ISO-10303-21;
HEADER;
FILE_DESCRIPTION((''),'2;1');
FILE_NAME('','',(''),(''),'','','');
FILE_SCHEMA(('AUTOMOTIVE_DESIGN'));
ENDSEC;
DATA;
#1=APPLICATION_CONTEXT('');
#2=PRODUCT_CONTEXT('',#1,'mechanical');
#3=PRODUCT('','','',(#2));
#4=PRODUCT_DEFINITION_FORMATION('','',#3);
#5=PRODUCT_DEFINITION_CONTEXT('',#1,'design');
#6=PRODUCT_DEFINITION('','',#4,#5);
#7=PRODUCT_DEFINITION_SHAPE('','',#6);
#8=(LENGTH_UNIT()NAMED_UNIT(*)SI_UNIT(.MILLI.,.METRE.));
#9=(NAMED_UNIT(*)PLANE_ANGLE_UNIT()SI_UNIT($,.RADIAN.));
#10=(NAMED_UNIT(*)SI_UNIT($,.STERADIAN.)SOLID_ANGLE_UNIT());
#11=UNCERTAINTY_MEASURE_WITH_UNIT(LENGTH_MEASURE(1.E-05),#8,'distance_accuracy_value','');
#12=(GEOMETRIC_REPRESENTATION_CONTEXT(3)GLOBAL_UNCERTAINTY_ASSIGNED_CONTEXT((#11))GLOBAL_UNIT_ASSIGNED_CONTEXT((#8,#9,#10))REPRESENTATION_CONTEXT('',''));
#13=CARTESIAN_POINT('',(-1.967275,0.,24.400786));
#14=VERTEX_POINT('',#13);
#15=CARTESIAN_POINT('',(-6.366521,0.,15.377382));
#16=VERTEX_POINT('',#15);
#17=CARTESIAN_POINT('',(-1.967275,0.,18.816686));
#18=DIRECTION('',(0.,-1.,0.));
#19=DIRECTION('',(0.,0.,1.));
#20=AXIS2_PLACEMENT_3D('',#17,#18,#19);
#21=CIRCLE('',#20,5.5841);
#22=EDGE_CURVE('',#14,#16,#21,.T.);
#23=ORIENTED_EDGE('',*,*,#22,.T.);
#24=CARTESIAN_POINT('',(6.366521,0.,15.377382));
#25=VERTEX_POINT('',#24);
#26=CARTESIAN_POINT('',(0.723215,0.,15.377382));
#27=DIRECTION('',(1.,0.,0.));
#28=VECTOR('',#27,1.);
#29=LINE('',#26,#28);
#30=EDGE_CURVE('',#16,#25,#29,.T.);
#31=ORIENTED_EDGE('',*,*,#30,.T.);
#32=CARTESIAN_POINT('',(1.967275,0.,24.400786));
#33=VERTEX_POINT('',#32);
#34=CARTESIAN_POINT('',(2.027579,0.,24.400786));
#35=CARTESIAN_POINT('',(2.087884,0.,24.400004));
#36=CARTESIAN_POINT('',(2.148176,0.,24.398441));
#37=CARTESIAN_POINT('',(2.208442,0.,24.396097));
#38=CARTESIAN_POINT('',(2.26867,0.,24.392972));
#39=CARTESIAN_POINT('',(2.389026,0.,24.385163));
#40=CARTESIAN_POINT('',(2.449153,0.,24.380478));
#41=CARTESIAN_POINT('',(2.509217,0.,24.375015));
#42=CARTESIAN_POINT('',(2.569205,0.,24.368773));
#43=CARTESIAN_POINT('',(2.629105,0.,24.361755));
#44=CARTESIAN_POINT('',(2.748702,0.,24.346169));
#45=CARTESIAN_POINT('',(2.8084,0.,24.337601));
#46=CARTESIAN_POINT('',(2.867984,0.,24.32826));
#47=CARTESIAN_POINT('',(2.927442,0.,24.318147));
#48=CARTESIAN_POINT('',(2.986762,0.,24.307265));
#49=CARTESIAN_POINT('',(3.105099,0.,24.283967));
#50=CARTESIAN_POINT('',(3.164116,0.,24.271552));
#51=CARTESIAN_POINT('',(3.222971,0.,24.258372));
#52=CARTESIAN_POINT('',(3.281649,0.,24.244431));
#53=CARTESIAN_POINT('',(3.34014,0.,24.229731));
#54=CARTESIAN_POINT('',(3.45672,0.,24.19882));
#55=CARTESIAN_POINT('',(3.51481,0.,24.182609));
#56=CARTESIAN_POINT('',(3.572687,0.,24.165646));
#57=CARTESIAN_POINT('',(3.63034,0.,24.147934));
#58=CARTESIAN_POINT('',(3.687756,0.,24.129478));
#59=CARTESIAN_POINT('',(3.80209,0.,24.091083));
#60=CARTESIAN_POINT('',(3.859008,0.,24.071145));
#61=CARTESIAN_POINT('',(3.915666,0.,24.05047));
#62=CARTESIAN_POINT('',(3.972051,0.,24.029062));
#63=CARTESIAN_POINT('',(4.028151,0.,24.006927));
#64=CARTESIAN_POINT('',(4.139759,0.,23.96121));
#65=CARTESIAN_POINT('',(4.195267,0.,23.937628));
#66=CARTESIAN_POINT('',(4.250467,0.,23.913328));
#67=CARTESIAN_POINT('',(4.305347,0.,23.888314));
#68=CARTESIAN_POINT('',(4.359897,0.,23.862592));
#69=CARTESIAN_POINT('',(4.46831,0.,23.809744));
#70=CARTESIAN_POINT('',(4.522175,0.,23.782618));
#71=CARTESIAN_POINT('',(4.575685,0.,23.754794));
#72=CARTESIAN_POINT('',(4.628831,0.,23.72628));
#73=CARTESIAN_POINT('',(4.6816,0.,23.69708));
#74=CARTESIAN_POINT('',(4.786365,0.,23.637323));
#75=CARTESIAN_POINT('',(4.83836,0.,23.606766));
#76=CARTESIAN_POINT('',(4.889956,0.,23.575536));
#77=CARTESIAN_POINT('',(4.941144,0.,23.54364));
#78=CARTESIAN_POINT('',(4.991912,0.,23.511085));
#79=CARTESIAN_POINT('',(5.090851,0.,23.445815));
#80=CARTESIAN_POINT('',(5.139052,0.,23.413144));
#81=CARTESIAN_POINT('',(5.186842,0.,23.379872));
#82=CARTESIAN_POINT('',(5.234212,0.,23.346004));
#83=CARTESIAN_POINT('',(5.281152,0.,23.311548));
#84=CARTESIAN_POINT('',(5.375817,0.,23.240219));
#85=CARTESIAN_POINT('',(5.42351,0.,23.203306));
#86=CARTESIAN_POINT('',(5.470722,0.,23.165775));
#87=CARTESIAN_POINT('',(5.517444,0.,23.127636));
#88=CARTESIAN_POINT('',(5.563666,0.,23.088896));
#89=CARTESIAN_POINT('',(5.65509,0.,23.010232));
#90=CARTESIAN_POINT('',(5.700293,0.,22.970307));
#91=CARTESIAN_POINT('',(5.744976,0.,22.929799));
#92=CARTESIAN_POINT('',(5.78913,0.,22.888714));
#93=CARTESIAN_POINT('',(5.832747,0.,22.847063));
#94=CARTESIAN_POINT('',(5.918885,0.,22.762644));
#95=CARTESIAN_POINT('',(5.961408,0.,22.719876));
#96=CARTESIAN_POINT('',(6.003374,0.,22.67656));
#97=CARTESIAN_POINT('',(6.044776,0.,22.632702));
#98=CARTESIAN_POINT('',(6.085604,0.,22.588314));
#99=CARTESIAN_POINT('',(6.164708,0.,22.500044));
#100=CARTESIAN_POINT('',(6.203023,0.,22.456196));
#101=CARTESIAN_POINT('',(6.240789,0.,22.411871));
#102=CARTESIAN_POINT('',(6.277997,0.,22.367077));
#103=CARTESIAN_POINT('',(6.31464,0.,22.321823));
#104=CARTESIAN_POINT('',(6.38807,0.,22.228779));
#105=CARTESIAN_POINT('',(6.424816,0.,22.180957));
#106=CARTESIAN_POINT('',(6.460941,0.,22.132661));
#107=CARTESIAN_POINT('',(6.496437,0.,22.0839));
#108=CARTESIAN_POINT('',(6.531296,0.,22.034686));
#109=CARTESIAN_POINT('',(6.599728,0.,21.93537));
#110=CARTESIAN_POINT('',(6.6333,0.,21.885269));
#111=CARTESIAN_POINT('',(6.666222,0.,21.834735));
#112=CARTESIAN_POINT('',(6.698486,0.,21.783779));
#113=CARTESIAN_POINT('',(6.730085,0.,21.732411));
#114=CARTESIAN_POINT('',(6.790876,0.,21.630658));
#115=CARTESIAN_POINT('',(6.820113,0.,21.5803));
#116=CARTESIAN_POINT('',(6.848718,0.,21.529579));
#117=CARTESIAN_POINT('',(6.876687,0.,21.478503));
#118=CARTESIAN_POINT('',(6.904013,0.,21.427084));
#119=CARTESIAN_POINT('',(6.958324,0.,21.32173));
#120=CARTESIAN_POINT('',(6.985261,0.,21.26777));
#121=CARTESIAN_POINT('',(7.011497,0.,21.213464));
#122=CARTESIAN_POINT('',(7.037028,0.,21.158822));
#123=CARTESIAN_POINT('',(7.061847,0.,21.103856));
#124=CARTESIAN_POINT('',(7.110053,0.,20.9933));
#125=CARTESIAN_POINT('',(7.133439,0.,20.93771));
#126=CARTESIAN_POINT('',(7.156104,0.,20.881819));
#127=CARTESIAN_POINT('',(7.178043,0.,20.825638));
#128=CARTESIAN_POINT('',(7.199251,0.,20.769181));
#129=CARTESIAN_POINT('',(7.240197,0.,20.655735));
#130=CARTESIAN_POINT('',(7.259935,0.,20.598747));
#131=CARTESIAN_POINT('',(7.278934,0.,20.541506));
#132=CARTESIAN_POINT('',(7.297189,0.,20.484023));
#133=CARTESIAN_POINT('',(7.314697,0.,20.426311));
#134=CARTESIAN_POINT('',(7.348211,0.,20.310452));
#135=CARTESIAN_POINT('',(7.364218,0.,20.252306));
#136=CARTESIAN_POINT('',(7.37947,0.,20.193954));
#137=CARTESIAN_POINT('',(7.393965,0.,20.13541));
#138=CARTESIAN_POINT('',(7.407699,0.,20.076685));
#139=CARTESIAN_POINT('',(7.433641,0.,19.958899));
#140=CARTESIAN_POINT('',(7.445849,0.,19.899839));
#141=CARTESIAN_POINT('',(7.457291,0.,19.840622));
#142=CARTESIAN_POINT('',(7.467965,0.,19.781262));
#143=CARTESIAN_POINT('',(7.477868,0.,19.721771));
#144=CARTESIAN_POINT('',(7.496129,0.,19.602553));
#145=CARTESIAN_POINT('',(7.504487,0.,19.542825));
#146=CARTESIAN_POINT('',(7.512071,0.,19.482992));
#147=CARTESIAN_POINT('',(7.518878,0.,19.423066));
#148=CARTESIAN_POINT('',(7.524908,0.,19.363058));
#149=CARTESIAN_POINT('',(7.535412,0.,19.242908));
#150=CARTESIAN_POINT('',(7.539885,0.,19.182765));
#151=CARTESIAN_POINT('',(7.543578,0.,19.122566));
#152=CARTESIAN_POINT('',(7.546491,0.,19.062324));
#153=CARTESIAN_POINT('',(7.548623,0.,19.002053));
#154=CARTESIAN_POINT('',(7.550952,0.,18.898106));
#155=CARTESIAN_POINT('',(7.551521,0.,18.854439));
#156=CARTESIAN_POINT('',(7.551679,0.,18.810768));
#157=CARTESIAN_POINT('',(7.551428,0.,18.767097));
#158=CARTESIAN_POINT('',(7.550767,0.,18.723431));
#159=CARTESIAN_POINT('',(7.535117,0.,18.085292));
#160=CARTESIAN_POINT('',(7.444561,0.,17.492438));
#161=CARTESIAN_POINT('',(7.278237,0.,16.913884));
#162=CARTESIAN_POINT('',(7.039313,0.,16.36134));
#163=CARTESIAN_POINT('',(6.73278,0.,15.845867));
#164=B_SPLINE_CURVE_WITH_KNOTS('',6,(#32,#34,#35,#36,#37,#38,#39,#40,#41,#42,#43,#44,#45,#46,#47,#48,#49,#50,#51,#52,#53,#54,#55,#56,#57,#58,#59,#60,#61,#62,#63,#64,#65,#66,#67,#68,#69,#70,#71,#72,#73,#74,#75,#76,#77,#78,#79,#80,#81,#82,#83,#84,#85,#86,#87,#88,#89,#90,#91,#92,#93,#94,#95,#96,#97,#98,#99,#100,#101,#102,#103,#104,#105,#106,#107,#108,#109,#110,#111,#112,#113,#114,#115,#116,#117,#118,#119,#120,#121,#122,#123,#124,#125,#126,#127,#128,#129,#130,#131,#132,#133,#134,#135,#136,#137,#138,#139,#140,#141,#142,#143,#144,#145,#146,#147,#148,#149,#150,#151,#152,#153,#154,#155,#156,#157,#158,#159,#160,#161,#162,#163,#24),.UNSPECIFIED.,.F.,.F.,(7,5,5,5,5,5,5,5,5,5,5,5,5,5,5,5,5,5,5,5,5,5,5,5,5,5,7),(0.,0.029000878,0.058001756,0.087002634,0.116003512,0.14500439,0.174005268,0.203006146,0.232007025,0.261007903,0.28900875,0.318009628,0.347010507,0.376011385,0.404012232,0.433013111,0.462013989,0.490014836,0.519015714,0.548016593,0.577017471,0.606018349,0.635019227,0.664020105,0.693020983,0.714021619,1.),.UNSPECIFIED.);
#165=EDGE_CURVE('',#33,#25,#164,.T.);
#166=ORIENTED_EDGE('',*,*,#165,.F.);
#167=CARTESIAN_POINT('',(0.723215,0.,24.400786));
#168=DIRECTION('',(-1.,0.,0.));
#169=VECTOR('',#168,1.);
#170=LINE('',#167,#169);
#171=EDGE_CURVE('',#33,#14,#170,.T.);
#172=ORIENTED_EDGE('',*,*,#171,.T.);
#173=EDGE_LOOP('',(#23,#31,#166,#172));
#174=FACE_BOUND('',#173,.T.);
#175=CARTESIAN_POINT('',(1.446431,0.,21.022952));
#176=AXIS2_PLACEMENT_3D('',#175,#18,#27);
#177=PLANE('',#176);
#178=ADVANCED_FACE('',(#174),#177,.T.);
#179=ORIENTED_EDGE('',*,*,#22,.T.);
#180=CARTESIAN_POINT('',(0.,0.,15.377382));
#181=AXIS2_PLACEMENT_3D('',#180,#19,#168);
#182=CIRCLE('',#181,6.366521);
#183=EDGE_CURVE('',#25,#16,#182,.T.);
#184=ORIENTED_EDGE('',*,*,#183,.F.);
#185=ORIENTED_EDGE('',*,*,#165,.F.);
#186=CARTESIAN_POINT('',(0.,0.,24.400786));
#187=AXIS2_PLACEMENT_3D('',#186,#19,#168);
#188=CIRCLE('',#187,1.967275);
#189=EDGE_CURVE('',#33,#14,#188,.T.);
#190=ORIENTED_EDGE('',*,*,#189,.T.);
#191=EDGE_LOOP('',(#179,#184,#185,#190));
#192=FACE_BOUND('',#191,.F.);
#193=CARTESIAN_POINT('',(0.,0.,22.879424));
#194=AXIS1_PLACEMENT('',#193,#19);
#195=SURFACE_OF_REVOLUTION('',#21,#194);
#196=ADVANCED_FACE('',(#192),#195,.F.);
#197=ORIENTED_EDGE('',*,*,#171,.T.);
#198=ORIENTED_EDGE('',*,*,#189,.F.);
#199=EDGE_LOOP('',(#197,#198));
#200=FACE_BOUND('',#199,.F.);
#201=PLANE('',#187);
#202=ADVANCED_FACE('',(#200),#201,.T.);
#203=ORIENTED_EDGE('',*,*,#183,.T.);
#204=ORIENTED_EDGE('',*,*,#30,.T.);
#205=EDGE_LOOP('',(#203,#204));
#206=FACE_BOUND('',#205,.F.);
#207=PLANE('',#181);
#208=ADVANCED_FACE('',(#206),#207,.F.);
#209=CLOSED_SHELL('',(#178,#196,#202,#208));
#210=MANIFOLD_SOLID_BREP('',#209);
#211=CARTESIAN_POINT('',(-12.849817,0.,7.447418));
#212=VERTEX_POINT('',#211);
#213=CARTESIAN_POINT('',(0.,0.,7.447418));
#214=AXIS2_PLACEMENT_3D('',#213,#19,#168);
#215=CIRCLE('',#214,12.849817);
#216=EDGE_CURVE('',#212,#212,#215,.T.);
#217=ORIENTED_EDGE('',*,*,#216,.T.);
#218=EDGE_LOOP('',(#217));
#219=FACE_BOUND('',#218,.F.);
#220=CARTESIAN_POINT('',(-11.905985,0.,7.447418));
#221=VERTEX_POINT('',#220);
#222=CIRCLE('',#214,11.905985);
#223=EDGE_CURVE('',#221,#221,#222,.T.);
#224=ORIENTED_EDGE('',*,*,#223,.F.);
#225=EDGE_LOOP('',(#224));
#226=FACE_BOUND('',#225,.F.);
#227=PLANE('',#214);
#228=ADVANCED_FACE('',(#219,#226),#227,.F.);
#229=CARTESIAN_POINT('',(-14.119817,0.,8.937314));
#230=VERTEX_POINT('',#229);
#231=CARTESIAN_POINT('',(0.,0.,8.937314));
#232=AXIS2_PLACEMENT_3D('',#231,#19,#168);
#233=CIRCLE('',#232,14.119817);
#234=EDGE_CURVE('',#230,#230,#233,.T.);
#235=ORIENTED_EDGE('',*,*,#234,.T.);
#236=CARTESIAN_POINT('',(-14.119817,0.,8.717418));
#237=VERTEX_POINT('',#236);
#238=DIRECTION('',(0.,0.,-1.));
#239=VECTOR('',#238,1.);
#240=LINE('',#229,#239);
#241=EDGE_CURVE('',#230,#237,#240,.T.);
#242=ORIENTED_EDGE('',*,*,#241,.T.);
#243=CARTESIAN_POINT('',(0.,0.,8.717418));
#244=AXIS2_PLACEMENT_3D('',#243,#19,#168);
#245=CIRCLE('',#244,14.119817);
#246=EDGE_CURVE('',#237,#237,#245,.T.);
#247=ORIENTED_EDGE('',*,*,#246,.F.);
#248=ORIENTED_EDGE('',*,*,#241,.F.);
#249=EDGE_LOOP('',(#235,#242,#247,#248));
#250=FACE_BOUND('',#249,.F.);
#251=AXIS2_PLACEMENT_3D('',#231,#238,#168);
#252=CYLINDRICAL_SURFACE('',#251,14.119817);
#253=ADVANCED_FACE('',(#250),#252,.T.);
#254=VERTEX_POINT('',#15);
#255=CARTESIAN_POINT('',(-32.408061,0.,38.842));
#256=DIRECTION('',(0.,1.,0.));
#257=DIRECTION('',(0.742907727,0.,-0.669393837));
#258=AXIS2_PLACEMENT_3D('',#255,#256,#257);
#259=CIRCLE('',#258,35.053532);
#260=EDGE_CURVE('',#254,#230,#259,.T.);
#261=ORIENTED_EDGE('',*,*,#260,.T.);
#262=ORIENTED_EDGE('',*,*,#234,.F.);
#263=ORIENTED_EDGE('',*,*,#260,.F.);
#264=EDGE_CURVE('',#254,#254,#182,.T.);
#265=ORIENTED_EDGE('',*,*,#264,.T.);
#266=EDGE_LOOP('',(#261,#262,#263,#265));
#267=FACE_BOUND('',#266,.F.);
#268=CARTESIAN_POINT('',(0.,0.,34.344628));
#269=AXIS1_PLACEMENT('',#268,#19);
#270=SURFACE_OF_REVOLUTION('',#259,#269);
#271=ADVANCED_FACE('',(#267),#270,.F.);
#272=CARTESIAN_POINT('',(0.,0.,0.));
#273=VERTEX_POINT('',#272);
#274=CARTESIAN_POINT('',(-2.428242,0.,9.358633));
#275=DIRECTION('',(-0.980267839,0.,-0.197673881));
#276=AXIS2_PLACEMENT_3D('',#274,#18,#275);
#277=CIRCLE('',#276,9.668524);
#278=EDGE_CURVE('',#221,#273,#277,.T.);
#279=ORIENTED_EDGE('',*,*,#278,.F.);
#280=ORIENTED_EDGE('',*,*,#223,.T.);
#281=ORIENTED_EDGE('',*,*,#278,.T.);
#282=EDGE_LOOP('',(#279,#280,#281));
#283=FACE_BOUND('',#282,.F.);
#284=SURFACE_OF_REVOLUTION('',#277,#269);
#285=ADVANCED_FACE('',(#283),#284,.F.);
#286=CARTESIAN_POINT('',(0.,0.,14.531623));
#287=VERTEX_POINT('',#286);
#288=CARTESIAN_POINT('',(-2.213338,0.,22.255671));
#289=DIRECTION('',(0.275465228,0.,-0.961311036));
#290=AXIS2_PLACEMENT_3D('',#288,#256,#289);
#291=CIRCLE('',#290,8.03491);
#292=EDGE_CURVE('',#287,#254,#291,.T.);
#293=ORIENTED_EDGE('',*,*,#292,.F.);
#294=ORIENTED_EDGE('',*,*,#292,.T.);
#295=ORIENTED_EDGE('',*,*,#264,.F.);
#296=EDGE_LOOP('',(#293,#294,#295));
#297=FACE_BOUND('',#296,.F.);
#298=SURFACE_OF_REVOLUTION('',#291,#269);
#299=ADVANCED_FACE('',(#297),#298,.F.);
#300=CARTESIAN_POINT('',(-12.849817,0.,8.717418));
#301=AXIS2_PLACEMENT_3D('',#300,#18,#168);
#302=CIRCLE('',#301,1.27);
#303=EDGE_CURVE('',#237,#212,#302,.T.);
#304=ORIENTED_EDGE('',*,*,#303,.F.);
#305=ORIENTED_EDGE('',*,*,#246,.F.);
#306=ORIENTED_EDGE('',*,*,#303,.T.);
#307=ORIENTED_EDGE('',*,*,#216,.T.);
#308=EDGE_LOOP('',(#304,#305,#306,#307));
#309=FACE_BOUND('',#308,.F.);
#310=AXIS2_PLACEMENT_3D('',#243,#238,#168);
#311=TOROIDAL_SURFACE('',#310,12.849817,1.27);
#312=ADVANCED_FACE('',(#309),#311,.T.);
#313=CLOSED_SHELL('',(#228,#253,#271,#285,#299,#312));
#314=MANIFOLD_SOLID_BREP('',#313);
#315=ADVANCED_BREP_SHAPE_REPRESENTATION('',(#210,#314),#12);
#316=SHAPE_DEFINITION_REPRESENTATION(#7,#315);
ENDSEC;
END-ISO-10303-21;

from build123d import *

# Parameters (mm, degrees)
F2_R     = 1.27
F5_W     = 28.0556213111
F5_H     = 15.8260483295
F6_DEPTH = 25.4


with BuildPart() as f1:
    # F0 (on Front) → F1 (revolve)
    with BuildSketch(Plane.XZ):
        with BuildLine():
            ThreePointArc((-11.905984953, 7.4474178255), (-7.5556070937, 1.1616523766), (0, 0))
            Line((0, 0), (0, 7.4474178255))
            Line((0, 7.4474178255), (-11.905984953, 7.4474178255))
        make_face()
        with BuildLine():
            Line((-11.905984953, 7.4474178255), (0, 7.4474178255))
            Line((0, 7.4474178255), (0, 14.5316230621))
            ThreePointArc((0, 14.5316230621), (-3.2714384324, 14.29073486), (-6.3665207505, 15.3773819909))
            ThreePointArc((-6.3665207505, 15.3773819909), (-10.0104927669, 11.8772257791), (-14.119816944, 8.9373141527))
            Line((-14.119816944, 8.9373141527), (-14.119816944, 7.4474178255))
            Line((-14.119816944, 7.4474178255), (-11.905984953, 7.4474178255))
        make_face()
    revolve(axis=Axis((0, 0, 34.3446284533), (0, 0, 1)))

    # F2
    f2_edges = [f1.edges().sort_by_distance(p)[0] for p in [
        (14.119817, 0, 7.447418),
    ]]
    fillet(f2_edges, radius=F2_R)


with BuildPart() as f4:
    # F3 (on Front) → F4 (revolve)
    with BuildSketch(Plane.XZ):
        with BuildLine():
            Line((-6.3665207505, 15.3773819909), (0, 15.3773819909))
            Line((0, 15.3773819909), (0, 24.4007859645))
            Line((0, 24.4007859645), (-1.9672751456, 24.4007859645))
            ThreePointArc((-1.9672751456, 24.4007859645), (-6.986617263, 21.2638021926), (-6.3665207505, 15.3773819909))
        make_face()
    revolve(axis=Axis((0, 0, 22.8794236608), (0, 0, 1)))

    # F5 (on Front) → F6 (cut)
    with BuildSketch(Plane.XZ):
        with Locations((1.4464305714, 21.0229521617)):
            Rectangle(F5_W, F5_H)
    extrude(amount=F6_DEPTH, mode=Mode.SUBTRACT)


solid = Compound([f1.part, f4.part])
